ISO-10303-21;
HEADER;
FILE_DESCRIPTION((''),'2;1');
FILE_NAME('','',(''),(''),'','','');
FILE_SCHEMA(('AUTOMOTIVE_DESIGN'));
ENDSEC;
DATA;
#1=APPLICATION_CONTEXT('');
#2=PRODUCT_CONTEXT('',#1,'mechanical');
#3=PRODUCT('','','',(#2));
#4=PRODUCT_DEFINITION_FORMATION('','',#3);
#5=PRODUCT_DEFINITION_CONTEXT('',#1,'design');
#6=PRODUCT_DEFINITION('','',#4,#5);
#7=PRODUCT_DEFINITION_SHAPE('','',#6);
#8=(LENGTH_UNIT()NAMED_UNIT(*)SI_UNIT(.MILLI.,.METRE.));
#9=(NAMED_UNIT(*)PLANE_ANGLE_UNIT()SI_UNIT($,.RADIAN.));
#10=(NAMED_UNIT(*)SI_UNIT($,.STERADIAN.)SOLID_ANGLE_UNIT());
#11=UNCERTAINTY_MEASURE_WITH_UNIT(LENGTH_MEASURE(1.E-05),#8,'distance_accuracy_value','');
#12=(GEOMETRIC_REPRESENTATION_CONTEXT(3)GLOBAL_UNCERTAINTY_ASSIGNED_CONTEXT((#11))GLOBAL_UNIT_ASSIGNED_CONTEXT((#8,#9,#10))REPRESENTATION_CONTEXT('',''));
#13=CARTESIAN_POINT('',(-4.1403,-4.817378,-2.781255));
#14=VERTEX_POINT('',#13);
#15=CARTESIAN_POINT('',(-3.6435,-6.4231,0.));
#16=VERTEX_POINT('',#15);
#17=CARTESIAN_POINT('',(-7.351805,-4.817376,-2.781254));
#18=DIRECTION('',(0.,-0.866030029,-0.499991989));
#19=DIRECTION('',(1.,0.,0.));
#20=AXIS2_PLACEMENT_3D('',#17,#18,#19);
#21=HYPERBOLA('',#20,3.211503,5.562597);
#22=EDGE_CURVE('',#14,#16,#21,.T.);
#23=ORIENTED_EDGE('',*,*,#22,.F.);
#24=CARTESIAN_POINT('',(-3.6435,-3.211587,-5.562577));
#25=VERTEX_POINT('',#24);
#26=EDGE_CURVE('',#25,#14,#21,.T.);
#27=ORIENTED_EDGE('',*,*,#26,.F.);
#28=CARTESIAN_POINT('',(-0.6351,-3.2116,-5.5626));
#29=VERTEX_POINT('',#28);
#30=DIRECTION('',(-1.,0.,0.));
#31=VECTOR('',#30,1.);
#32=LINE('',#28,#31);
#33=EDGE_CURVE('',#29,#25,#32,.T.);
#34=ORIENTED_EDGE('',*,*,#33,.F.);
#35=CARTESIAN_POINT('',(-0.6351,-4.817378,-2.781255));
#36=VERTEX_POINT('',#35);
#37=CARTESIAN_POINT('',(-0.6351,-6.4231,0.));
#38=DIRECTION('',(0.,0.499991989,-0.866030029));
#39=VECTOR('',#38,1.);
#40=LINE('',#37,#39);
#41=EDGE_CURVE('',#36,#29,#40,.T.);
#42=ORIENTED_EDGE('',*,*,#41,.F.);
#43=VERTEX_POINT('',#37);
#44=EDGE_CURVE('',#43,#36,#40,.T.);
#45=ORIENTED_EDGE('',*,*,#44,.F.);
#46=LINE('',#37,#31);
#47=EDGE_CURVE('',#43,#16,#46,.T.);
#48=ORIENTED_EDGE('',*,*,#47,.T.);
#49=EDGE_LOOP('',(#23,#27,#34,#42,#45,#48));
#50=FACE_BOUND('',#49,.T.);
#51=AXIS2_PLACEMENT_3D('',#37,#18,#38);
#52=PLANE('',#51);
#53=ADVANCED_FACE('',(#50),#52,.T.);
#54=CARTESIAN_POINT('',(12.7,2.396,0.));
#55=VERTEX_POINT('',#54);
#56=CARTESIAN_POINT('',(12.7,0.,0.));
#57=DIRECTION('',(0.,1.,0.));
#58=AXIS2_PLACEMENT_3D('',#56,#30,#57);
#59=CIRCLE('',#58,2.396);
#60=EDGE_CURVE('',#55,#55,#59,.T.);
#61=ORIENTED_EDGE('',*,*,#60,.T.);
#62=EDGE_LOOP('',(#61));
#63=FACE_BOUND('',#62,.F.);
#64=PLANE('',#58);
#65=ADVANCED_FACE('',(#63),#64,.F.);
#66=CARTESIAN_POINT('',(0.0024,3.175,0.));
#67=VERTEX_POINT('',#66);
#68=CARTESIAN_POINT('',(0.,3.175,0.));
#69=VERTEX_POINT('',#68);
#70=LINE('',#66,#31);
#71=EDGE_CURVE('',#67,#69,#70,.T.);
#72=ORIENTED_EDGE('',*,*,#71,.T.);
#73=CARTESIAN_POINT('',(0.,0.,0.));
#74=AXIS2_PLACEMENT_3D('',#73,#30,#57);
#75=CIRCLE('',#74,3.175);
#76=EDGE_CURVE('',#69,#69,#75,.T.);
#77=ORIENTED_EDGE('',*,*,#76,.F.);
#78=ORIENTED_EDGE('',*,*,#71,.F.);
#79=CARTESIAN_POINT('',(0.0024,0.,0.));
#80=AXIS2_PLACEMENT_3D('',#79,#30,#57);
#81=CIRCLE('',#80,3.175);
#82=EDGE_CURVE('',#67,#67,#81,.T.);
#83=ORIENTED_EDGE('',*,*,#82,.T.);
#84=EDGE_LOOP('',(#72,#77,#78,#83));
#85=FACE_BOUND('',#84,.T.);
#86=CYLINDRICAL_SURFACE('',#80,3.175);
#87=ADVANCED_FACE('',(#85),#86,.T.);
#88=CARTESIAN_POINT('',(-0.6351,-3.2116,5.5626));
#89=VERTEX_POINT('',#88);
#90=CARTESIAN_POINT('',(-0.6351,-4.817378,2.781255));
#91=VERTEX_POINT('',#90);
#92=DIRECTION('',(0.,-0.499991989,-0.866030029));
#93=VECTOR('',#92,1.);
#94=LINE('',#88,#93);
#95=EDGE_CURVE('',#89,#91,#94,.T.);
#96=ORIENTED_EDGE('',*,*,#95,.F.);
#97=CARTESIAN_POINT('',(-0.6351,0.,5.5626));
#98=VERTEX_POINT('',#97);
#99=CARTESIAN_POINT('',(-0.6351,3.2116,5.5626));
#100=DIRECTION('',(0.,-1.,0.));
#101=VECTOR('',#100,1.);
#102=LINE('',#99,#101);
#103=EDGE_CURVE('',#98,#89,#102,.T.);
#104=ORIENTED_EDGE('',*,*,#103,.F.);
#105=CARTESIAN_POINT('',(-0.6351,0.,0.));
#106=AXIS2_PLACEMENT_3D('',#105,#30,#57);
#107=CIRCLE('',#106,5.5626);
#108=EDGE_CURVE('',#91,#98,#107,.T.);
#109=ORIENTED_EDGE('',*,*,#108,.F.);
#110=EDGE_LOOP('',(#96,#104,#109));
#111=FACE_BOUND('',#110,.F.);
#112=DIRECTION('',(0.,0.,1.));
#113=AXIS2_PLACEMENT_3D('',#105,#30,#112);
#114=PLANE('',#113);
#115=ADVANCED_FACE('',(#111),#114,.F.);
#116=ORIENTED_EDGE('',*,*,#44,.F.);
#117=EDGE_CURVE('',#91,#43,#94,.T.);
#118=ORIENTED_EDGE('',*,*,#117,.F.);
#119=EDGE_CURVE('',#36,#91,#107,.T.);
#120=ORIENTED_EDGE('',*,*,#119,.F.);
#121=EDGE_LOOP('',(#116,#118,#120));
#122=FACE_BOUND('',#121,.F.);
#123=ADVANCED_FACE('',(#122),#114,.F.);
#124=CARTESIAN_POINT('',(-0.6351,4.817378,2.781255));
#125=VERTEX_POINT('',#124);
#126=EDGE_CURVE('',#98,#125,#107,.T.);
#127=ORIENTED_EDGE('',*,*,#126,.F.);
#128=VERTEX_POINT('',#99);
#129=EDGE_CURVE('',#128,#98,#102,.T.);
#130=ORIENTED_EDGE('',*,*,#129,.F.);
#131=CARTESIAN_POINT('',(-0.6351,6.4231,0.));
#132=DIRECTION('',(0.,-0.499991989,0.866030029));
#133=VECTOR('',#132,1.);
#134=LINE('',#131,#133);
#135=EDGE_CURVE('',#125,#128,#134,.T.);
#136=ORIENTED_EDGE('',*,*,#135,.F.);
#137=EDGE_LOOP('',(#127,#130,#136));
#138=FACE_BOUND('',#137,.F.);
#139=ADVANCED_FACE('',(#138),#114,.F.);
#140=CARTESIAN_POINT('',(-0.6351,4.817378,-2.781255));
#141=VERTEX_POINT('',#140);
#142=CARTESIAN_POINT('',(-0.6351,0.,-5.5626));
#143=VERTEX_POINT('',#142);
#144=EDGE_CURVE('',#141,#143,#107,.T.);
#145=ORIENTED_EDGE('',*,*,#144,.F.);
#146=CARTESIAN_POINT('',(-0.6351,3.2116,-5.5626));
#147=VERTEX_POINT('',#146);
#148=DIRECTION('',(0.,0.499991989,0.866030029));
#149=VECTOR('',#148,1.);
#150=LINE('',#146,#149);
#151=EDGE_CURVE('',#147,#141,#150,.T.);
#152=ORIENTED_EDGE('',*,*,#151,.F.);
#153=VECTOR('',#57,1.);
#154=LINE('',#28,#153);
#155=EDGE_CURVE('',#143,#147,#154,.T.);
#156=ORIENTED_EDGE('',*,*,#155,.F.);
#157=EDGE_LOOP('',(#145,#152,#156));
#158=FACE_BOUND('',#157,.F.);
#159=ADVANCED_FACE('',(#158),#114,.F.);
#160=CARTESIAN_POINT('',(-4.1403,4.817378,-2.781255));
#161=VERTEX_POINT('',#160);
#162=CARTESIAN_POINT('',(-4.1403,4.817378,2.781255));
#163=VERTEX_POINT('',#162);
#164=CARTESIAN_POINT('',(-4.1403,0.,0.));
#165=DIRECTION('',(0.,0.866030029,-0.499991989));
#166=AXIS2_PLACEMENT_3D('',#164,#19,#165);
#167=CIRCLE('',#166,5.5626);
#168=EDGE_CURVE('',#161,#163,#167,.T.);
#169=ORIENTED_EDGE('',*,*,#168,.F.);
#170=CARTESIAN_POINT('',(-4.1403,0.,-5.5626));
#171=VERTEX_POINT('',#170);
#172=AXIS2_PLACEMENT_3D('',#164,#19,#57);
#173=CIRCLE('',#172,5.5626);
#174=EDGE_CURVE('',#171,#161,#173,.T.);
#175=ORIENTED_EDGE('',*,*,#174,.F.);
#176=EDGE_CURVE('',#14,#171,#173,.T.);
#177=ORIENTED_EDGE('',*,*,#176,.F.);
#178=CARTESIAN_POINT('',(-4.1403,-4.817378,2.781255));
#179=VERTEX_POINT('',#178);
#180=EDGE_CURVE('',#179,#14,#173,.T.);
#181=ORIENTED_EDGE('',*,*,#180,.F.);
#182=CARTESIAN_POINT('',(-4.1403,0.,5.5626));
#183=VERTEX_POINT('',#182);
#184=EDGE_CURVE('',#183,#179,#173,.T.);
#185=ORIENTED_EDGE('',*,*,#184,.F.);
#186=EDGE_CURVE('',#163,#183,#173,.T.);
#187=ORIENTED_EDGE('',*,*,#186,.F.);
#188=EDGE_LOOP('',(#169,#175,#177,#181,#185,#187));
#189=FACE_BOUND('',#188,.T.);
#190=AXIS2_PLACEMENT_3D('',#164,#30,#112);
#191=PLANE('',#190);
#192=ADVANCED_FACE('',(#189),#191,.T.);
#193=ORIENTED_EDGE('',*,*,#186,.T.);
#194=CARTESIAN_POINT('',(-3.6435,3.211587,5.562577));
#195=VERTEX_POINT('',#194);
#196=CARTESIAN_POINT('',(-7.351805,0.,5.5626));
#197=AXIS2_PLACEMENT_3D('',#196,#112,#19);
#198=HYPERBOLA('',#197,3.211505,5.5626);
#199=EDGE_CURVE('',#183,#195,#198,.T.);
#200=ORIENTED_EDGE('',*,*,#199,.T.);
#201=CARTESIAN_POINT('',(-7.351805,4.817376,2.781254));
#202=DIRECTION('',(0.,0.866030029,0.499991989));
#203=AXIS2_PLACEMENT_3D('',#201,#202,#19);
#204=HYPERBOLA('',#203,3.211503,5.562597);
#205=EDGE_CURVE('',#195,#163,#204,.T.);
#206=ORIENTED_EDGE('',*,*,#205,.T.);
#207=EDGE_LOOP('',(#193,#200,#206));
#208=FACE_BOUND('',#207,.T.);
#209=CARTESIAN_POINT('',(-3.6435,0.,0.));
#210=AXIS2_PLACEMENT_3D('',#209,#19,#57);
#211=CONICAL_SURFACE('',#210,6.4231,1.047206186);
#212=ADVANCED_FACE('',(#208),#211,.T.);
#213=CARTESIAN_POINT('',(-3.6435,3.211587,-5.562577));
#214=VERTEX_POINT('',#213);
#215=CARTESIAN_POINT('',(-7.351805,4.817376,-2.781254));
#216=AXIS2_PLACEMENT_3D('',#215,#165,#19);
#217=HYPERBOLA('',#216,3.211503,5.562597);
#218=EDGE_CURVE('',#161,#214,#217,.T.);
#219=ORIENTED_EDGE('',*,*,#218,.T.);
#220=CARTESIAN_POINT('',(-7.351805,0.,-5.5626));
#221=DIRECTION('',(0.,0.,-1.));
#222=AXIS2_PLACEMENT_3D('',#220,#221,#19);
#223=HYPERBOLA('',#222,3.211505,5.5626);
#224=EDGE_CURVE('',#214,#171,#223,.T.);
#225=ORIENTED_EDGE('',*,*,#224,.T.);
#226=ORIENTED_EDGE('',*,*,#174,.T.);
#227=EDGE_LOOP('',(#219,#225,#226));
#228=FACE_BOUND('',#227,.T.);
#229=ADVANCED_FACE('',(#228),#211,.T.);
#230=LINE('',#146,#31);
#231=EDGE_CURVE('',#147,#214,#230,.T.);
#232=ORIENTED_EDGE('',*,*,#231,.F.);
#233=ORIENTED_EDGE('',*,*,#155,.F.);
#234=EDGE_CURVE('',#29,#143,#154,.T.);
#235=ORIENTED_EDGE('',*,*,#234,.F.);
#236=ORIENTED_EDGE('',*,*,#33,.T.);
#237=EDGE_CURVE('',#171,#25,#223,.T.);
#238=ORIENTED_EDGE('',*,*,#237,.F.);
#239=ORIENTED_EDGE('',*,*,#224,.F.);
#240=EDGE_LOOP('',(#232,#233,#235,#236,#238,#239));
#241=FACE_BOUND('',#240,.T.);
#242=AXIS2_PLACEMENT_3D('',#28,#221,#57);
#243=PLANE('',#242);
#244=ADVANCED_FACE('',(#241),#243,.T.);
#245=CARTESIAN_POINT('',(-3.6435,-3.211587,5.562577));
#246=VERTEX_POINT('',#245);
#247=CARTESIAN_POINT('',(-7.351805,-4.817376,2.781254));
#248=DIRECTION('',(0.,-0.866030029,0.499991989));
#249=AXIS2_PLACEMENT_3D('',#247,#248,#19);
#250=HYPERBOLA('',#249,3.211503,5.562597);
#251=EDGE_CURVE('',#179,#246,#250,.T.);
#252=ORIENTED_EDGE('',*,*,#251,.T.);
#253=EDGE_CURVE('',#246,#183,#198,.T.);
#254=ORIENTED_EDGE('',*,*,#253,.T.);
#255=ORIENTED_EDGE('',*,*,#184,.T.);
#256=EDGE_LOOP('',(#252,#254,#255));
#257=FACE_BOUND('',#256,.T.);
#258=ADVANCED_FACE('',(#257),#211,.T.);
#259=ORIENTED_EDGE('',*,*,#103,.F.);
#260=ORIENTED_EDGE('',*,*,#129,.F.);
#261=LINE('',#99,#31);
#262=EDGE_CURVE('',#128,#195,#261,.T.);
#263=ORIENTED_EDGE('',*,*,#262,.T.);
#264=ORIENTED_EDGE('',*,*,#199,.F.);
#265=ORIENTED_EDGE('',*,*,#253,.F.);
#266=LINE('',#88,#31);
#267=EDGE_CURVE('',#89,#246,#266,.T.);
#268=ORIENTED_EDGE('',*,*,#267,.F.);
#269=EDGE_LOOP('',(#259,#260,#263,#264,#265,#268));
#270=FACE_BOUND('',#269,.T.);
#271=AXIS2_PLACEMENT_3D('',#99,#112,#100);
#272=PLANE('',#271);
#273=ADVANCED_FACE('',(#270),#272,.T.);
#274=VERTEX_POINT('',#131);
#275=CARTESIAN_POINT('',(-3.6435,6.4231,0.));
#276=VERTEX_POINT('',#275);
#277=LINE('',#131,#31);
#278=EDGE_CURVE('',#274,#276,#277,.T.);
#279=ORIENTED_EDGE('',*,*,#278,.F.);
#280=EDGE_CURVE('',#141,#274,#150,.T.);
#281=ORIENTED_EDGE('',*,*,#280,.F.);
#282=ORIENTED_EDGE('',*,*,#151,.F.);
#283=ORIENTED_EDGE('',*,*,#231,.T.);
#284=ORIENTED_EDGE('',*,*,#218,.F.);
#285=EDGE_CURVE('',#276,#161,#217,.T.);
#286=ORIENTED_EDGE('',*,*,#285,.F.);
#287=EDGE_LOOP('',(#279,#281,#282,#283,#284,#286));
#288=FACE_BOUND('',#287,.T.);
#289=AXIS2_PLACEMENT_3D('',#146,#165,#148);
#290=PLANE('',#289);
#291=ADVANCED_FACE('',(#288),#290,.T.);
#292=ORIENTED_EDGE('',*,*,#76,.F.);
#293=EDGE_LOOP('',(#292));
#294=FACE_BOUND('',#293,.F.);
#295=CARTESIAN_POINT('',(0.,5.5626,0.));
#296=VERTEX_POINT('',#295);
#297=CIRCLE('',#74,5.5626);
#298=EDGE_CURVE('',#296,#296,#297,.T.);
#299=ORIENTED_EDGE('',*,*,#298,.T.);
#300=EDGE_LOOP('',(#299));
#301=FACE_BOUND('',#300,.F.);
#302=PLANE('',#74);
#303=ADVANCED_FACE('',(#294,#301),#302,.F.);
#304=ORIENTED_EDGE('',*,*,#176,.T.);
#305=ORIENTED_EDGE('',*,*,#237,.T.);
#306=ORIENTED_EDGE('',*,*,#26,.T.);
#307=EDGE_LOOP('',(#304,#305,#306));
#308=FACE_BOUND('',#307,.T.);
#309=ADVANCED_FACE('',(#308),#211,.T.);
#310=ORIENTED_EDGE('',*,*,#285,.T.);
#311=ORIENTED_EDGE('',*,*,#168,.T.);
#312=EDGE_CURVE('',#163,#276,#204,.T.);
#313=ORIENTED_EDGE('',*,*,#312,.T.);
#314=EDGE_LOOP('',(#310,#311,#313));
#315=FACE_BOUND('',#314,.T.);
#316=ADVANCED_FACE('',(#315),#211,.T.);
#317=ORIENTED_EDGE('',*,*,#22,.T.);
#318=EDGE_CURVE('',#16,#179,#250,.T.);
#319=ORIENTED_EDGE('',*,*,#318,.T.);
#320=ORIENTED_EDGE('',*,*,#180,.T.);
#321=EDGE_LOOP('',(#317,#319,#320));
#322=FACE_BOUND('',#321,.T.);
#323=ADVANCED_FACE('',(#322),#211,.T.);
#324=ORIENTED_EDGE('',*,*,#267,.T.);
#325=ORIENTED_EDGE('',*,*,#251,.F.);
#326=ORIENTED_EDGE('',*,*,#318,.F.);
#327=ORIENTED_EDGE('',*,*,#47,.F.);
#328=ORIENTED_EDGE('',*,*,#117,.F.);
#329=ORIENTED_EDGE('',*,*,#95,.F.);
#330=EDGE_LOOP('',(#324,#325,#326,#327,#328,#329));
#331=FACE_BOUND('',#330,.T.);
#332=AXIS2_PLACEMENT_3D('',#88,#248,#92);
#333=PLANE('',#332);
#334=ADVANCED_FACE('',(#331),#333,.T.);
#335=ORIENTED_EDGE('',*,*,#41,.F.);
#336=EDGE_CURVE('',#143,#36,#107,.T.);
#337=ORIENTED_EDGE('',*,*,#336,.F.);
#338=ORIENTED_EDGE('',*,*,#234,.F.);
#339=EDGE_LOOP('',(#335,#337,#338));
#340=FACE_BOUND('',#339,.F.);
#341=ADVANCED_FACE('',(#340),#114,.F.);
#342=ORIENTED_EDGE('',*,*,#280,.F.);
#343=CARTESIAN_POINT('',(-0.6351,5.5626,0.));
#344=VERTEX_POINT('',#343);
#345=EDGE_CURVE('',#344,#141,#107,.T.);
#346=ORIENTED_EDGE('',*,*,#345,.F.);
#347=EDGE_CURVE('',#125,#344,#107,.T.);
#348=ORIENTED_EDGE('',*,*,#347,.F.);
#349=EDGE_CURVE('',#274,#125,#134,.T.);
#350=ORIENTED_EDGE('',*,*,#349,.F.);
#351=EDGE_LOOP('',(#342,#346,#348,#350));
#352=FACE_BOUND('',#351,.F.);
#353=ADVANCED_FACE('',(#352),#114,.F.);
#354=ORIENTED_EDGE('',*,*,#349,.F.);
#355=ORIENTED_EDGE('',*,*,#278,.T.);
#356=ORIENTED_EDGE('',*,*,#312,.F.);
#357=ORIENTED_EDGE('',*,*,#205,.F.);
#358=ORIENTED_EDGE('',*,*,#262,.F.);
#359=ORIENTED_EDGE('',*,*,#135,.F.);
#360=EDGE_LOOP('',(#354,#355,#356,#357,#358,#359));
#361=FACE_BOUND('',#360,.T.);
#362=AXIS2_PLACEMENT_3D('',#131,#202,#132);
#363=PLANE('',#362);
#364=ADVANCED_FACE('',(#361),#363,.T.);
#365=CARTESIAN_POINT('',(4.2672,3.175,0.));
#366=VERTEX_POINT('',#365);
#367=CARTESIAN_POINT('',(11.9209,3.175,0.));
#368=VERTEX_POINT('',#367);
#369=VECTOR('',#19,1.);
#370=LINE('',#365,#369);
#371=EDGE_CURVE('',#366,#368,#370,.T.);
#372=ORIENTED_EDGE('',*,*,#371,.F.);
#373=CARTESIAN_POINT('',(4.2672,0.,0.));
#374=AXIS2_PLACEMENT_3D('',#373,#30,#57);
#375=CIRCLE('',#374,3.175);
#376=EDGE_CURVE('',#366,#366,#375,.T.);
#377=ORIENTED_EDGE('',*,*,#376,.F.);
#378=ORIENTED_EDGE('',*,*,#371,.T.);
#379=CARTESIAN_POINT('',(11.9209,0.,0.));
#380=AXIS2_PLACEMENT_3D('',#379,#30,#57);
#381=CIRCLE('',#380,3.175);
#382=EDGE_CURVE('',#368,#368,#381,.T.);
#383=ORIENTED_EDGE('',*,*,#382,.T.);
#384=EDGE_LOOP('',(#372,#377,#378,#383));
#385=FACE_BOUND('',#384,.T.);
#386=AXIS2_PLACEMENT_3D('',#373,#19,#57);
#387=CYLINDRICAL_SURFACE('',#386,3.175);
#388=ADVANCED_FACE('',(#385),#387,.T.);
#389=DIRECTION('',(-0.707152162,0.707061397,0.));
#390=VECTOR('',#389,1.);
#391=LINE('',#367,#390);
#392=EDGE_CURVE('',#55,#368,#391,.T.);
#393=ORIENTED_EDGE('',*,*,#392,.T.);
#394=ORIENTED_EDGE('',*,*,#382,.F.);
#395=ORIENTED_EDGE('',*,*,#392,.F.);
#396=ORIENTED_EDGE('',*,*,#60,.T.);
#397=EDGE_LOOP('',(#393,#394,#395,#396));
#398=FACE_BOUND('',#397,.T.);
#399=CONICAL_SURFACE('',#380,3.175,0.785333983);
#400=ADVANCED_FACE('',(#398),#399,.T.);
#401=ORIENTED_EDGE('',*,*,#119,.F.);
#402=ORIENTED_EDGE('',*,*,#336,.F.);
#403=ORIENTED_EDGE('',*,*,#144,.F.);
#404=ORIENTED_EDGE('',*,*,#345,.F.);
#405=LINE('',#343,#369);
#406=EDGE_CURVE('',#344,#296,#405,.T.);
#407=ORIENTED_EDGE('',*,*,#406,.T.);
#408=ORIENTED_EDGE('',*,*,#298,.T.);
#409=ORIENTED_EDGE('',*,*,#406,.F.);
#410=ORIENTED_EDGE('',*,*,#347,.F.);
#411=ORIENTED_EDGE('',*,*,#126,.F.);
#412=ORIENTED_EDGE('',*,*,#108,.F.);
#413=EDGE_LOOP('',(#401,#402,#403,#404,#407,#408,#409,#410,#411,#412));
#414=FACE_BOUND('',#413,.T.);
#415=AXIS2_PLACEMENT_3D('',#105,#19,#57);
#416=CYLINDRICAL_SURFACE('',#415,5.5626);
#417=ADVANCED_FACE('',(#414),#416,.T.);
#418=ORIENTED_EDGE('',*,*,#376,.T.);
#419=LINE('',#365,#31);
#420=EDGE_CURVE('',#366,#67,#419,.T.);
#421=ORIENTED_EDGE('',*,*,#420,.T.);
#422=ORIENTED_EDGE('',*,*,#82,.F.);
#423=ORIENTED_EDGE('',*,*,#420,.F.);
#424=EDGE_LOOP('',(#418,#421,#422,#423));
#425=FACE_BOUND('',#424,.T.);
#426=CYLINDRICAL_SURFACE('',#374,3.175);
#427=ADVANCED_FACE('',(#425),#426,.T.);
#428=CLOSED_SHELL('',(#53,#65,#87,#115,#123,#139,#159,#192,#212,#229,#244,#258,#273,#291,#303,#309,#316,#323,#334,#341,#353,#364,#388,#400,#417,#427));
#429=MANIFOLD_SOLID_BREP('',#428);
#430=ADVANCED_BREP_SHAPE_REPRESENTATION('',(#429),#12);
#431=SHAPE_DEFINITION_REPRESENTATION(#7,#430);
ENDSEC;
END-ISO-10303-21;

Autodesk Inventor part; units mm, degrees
ref_plane "YZ Plane" through (0, 0, 0) normal (1, 0, 0) x (0, 1, 0)
ref_plane "XZ Plane" through (0, 0, 0) normal (0, 1, 0) x (-1, 0, 0)
sketch "Boceto1" plane through (0, 0, 0) normal (0, 0, 1) x (1, 0, 0)
  line L0 (0, 5.5626) -> (0, 3.175)
  line L1 (4.2672, 3.175) -> (12.7, 3.175)
  line L2 (12.7, 3.175) -> (12.7, 0)
  line L3 (12.7, 0) -> (-0.6351, 0)
  line L4 (-3.3021, 0) -> (15.367, 0) projected
  line L5 (-0.6351, 0) -> (-0.6351, 5.5626)
  line L6 (-0.6351, 5.5626) -> (0, 5.5626)
  line L7 (4.2672, 3.175) -> (0.0024, 3.175)
  line L8 (0.0024, 3.175) -> (0, 3.175)
  line L9 (0, -1.1125) -> (0, 6.6751) projected
  dimension "d0" = 12.7
  dimension "d1" = 8.4328
  dimension "d2" = 6.35
  dimension "d9" = 0.6351
  dimension "d10" = 11.1252
  dimension "d13" = 4.2648
  dimension "d14" = 6.35
revolve "Cuerpo" add sketch "Boceto1" angle 360 about axis through (12.7, 0, 0) along (-1, 0, 0)
sketch "Boceto2" plane through (-0.6351, 0, 0) normal (-1, 0, 0) x (0, 0, 1)
  line L0 (0, 6.4231) -> (5.5626, 3.2116)
  line L1 (5.5626, 3.2116) -> (5.5626, -3.2116)
  line L2 (5.5626, -3.2116) -> (0, -6.4231)
  line L3 (0, -6.4231) -> (-5.5626, -3.2116)
  line L4 (-5.5626, -3.2116) -> (-5.5626, 3.2116)
  line L5 (-5.5626, 3.2116) -> (0, 6.4231)
  point P0 (0, 0)
  point P1 (0, 0)
  dimension "d11" = 11.1252
extrude "Cabeza" add sketch "Boceto2" along normal blind 3.5052
sketch "Boceto4" plane through (0, 0, 0) normal (0, 0, 1) x (1, 0, 0)
  line L0 (-4.1403, 5.5626) -> (-4.1403, 6.4231)
  line L1 (-4.1403, 6.4231) -> (-3.6435, 6.4231)
  line L2 (-3.6435, 6.4231) -> (-4.1403, 5.5626)
  line L3 (-4.8413, 0) -> (0.0659, 0) projected
  line L4 (-0.6351, 6.4231) -> (-4.1403, 6.4231) projected
  line L5 (-4.1403, 3.2116) -> (-4.1403, 6.4231) projected
  dimension "d5" = 30
  dimension "d19" = 11.1252
revolve "Chaflán1" cut sketch "Boceto4" angle 360 about axis through (-10, 0, 0) along (1, 0, 0)
thread "Rosca" size "1/4-20 UNC" class "2A" standard "ANSI Unified Screw Threads" length 8.4328
chamfer "Chaflán2" distance 0.779 distance2 0.7791 1 edges at (12.7, -3.175, 0) measured on face at (12.7, -1.1281, 0.661)
ref_plane "Work Plane1" through (1.525, 0, 0) normal (0, 0, 1) x (1, 0, 0)
equation "\"d0\" = NLG"
equation "\"d1\" = GEL"
equation "\"d2\" = GD"
equation "\"d10\" = SD2"
equation "\"d14\" = BDM"
equation "\"d11\" = SW"
equation "\"d3\" = KOH - SD"
equation "\"d5\" = ANG1"
equation "\"d19\" = SW0"
equation "\"d15\" = GEL"
equation "\"d6\" = -0.5 * SPD + 0.5 * GD"
equation "\"NLG\" = 12.7"
equation "\"GD\" = 6.35"
equation "\"BDM\" = 6.35"
equation "\"KOH\" = 4.1402"
equation "\"GEL\" = 8.4328"
equation "\"SW\" = 11.1252"
equation "\"SW0\" = SW"
equation "\"SPD\" = GD1"
equation "\"SD2\" = SW"
equation "\"SD\" = 0.635"
equation "\"ANG1\" = 30deg"
equation "\"GAL\" = 4.26466"
equation "\"GUL\" = 0.77902"
equation "\"RR\" = 0.381"
equation "\"WFT\" = SD"
equation "\"GD1\" = 4.79196"
equation "\"THREADDIA\" = 6.35"
equation "\"SDH\" = SW"
equation "\"SDHG\" = 0.00254"
equation "\"TOA\" = 30deg"
equation "\"FAWI\" = 45deg"
equation "\"NND\" = 6.35"
equation "\"E0\" = 12.84961"
properties part number "AS 2465 - 1/4 x 1/2  UNC" material "Acero, suave"
